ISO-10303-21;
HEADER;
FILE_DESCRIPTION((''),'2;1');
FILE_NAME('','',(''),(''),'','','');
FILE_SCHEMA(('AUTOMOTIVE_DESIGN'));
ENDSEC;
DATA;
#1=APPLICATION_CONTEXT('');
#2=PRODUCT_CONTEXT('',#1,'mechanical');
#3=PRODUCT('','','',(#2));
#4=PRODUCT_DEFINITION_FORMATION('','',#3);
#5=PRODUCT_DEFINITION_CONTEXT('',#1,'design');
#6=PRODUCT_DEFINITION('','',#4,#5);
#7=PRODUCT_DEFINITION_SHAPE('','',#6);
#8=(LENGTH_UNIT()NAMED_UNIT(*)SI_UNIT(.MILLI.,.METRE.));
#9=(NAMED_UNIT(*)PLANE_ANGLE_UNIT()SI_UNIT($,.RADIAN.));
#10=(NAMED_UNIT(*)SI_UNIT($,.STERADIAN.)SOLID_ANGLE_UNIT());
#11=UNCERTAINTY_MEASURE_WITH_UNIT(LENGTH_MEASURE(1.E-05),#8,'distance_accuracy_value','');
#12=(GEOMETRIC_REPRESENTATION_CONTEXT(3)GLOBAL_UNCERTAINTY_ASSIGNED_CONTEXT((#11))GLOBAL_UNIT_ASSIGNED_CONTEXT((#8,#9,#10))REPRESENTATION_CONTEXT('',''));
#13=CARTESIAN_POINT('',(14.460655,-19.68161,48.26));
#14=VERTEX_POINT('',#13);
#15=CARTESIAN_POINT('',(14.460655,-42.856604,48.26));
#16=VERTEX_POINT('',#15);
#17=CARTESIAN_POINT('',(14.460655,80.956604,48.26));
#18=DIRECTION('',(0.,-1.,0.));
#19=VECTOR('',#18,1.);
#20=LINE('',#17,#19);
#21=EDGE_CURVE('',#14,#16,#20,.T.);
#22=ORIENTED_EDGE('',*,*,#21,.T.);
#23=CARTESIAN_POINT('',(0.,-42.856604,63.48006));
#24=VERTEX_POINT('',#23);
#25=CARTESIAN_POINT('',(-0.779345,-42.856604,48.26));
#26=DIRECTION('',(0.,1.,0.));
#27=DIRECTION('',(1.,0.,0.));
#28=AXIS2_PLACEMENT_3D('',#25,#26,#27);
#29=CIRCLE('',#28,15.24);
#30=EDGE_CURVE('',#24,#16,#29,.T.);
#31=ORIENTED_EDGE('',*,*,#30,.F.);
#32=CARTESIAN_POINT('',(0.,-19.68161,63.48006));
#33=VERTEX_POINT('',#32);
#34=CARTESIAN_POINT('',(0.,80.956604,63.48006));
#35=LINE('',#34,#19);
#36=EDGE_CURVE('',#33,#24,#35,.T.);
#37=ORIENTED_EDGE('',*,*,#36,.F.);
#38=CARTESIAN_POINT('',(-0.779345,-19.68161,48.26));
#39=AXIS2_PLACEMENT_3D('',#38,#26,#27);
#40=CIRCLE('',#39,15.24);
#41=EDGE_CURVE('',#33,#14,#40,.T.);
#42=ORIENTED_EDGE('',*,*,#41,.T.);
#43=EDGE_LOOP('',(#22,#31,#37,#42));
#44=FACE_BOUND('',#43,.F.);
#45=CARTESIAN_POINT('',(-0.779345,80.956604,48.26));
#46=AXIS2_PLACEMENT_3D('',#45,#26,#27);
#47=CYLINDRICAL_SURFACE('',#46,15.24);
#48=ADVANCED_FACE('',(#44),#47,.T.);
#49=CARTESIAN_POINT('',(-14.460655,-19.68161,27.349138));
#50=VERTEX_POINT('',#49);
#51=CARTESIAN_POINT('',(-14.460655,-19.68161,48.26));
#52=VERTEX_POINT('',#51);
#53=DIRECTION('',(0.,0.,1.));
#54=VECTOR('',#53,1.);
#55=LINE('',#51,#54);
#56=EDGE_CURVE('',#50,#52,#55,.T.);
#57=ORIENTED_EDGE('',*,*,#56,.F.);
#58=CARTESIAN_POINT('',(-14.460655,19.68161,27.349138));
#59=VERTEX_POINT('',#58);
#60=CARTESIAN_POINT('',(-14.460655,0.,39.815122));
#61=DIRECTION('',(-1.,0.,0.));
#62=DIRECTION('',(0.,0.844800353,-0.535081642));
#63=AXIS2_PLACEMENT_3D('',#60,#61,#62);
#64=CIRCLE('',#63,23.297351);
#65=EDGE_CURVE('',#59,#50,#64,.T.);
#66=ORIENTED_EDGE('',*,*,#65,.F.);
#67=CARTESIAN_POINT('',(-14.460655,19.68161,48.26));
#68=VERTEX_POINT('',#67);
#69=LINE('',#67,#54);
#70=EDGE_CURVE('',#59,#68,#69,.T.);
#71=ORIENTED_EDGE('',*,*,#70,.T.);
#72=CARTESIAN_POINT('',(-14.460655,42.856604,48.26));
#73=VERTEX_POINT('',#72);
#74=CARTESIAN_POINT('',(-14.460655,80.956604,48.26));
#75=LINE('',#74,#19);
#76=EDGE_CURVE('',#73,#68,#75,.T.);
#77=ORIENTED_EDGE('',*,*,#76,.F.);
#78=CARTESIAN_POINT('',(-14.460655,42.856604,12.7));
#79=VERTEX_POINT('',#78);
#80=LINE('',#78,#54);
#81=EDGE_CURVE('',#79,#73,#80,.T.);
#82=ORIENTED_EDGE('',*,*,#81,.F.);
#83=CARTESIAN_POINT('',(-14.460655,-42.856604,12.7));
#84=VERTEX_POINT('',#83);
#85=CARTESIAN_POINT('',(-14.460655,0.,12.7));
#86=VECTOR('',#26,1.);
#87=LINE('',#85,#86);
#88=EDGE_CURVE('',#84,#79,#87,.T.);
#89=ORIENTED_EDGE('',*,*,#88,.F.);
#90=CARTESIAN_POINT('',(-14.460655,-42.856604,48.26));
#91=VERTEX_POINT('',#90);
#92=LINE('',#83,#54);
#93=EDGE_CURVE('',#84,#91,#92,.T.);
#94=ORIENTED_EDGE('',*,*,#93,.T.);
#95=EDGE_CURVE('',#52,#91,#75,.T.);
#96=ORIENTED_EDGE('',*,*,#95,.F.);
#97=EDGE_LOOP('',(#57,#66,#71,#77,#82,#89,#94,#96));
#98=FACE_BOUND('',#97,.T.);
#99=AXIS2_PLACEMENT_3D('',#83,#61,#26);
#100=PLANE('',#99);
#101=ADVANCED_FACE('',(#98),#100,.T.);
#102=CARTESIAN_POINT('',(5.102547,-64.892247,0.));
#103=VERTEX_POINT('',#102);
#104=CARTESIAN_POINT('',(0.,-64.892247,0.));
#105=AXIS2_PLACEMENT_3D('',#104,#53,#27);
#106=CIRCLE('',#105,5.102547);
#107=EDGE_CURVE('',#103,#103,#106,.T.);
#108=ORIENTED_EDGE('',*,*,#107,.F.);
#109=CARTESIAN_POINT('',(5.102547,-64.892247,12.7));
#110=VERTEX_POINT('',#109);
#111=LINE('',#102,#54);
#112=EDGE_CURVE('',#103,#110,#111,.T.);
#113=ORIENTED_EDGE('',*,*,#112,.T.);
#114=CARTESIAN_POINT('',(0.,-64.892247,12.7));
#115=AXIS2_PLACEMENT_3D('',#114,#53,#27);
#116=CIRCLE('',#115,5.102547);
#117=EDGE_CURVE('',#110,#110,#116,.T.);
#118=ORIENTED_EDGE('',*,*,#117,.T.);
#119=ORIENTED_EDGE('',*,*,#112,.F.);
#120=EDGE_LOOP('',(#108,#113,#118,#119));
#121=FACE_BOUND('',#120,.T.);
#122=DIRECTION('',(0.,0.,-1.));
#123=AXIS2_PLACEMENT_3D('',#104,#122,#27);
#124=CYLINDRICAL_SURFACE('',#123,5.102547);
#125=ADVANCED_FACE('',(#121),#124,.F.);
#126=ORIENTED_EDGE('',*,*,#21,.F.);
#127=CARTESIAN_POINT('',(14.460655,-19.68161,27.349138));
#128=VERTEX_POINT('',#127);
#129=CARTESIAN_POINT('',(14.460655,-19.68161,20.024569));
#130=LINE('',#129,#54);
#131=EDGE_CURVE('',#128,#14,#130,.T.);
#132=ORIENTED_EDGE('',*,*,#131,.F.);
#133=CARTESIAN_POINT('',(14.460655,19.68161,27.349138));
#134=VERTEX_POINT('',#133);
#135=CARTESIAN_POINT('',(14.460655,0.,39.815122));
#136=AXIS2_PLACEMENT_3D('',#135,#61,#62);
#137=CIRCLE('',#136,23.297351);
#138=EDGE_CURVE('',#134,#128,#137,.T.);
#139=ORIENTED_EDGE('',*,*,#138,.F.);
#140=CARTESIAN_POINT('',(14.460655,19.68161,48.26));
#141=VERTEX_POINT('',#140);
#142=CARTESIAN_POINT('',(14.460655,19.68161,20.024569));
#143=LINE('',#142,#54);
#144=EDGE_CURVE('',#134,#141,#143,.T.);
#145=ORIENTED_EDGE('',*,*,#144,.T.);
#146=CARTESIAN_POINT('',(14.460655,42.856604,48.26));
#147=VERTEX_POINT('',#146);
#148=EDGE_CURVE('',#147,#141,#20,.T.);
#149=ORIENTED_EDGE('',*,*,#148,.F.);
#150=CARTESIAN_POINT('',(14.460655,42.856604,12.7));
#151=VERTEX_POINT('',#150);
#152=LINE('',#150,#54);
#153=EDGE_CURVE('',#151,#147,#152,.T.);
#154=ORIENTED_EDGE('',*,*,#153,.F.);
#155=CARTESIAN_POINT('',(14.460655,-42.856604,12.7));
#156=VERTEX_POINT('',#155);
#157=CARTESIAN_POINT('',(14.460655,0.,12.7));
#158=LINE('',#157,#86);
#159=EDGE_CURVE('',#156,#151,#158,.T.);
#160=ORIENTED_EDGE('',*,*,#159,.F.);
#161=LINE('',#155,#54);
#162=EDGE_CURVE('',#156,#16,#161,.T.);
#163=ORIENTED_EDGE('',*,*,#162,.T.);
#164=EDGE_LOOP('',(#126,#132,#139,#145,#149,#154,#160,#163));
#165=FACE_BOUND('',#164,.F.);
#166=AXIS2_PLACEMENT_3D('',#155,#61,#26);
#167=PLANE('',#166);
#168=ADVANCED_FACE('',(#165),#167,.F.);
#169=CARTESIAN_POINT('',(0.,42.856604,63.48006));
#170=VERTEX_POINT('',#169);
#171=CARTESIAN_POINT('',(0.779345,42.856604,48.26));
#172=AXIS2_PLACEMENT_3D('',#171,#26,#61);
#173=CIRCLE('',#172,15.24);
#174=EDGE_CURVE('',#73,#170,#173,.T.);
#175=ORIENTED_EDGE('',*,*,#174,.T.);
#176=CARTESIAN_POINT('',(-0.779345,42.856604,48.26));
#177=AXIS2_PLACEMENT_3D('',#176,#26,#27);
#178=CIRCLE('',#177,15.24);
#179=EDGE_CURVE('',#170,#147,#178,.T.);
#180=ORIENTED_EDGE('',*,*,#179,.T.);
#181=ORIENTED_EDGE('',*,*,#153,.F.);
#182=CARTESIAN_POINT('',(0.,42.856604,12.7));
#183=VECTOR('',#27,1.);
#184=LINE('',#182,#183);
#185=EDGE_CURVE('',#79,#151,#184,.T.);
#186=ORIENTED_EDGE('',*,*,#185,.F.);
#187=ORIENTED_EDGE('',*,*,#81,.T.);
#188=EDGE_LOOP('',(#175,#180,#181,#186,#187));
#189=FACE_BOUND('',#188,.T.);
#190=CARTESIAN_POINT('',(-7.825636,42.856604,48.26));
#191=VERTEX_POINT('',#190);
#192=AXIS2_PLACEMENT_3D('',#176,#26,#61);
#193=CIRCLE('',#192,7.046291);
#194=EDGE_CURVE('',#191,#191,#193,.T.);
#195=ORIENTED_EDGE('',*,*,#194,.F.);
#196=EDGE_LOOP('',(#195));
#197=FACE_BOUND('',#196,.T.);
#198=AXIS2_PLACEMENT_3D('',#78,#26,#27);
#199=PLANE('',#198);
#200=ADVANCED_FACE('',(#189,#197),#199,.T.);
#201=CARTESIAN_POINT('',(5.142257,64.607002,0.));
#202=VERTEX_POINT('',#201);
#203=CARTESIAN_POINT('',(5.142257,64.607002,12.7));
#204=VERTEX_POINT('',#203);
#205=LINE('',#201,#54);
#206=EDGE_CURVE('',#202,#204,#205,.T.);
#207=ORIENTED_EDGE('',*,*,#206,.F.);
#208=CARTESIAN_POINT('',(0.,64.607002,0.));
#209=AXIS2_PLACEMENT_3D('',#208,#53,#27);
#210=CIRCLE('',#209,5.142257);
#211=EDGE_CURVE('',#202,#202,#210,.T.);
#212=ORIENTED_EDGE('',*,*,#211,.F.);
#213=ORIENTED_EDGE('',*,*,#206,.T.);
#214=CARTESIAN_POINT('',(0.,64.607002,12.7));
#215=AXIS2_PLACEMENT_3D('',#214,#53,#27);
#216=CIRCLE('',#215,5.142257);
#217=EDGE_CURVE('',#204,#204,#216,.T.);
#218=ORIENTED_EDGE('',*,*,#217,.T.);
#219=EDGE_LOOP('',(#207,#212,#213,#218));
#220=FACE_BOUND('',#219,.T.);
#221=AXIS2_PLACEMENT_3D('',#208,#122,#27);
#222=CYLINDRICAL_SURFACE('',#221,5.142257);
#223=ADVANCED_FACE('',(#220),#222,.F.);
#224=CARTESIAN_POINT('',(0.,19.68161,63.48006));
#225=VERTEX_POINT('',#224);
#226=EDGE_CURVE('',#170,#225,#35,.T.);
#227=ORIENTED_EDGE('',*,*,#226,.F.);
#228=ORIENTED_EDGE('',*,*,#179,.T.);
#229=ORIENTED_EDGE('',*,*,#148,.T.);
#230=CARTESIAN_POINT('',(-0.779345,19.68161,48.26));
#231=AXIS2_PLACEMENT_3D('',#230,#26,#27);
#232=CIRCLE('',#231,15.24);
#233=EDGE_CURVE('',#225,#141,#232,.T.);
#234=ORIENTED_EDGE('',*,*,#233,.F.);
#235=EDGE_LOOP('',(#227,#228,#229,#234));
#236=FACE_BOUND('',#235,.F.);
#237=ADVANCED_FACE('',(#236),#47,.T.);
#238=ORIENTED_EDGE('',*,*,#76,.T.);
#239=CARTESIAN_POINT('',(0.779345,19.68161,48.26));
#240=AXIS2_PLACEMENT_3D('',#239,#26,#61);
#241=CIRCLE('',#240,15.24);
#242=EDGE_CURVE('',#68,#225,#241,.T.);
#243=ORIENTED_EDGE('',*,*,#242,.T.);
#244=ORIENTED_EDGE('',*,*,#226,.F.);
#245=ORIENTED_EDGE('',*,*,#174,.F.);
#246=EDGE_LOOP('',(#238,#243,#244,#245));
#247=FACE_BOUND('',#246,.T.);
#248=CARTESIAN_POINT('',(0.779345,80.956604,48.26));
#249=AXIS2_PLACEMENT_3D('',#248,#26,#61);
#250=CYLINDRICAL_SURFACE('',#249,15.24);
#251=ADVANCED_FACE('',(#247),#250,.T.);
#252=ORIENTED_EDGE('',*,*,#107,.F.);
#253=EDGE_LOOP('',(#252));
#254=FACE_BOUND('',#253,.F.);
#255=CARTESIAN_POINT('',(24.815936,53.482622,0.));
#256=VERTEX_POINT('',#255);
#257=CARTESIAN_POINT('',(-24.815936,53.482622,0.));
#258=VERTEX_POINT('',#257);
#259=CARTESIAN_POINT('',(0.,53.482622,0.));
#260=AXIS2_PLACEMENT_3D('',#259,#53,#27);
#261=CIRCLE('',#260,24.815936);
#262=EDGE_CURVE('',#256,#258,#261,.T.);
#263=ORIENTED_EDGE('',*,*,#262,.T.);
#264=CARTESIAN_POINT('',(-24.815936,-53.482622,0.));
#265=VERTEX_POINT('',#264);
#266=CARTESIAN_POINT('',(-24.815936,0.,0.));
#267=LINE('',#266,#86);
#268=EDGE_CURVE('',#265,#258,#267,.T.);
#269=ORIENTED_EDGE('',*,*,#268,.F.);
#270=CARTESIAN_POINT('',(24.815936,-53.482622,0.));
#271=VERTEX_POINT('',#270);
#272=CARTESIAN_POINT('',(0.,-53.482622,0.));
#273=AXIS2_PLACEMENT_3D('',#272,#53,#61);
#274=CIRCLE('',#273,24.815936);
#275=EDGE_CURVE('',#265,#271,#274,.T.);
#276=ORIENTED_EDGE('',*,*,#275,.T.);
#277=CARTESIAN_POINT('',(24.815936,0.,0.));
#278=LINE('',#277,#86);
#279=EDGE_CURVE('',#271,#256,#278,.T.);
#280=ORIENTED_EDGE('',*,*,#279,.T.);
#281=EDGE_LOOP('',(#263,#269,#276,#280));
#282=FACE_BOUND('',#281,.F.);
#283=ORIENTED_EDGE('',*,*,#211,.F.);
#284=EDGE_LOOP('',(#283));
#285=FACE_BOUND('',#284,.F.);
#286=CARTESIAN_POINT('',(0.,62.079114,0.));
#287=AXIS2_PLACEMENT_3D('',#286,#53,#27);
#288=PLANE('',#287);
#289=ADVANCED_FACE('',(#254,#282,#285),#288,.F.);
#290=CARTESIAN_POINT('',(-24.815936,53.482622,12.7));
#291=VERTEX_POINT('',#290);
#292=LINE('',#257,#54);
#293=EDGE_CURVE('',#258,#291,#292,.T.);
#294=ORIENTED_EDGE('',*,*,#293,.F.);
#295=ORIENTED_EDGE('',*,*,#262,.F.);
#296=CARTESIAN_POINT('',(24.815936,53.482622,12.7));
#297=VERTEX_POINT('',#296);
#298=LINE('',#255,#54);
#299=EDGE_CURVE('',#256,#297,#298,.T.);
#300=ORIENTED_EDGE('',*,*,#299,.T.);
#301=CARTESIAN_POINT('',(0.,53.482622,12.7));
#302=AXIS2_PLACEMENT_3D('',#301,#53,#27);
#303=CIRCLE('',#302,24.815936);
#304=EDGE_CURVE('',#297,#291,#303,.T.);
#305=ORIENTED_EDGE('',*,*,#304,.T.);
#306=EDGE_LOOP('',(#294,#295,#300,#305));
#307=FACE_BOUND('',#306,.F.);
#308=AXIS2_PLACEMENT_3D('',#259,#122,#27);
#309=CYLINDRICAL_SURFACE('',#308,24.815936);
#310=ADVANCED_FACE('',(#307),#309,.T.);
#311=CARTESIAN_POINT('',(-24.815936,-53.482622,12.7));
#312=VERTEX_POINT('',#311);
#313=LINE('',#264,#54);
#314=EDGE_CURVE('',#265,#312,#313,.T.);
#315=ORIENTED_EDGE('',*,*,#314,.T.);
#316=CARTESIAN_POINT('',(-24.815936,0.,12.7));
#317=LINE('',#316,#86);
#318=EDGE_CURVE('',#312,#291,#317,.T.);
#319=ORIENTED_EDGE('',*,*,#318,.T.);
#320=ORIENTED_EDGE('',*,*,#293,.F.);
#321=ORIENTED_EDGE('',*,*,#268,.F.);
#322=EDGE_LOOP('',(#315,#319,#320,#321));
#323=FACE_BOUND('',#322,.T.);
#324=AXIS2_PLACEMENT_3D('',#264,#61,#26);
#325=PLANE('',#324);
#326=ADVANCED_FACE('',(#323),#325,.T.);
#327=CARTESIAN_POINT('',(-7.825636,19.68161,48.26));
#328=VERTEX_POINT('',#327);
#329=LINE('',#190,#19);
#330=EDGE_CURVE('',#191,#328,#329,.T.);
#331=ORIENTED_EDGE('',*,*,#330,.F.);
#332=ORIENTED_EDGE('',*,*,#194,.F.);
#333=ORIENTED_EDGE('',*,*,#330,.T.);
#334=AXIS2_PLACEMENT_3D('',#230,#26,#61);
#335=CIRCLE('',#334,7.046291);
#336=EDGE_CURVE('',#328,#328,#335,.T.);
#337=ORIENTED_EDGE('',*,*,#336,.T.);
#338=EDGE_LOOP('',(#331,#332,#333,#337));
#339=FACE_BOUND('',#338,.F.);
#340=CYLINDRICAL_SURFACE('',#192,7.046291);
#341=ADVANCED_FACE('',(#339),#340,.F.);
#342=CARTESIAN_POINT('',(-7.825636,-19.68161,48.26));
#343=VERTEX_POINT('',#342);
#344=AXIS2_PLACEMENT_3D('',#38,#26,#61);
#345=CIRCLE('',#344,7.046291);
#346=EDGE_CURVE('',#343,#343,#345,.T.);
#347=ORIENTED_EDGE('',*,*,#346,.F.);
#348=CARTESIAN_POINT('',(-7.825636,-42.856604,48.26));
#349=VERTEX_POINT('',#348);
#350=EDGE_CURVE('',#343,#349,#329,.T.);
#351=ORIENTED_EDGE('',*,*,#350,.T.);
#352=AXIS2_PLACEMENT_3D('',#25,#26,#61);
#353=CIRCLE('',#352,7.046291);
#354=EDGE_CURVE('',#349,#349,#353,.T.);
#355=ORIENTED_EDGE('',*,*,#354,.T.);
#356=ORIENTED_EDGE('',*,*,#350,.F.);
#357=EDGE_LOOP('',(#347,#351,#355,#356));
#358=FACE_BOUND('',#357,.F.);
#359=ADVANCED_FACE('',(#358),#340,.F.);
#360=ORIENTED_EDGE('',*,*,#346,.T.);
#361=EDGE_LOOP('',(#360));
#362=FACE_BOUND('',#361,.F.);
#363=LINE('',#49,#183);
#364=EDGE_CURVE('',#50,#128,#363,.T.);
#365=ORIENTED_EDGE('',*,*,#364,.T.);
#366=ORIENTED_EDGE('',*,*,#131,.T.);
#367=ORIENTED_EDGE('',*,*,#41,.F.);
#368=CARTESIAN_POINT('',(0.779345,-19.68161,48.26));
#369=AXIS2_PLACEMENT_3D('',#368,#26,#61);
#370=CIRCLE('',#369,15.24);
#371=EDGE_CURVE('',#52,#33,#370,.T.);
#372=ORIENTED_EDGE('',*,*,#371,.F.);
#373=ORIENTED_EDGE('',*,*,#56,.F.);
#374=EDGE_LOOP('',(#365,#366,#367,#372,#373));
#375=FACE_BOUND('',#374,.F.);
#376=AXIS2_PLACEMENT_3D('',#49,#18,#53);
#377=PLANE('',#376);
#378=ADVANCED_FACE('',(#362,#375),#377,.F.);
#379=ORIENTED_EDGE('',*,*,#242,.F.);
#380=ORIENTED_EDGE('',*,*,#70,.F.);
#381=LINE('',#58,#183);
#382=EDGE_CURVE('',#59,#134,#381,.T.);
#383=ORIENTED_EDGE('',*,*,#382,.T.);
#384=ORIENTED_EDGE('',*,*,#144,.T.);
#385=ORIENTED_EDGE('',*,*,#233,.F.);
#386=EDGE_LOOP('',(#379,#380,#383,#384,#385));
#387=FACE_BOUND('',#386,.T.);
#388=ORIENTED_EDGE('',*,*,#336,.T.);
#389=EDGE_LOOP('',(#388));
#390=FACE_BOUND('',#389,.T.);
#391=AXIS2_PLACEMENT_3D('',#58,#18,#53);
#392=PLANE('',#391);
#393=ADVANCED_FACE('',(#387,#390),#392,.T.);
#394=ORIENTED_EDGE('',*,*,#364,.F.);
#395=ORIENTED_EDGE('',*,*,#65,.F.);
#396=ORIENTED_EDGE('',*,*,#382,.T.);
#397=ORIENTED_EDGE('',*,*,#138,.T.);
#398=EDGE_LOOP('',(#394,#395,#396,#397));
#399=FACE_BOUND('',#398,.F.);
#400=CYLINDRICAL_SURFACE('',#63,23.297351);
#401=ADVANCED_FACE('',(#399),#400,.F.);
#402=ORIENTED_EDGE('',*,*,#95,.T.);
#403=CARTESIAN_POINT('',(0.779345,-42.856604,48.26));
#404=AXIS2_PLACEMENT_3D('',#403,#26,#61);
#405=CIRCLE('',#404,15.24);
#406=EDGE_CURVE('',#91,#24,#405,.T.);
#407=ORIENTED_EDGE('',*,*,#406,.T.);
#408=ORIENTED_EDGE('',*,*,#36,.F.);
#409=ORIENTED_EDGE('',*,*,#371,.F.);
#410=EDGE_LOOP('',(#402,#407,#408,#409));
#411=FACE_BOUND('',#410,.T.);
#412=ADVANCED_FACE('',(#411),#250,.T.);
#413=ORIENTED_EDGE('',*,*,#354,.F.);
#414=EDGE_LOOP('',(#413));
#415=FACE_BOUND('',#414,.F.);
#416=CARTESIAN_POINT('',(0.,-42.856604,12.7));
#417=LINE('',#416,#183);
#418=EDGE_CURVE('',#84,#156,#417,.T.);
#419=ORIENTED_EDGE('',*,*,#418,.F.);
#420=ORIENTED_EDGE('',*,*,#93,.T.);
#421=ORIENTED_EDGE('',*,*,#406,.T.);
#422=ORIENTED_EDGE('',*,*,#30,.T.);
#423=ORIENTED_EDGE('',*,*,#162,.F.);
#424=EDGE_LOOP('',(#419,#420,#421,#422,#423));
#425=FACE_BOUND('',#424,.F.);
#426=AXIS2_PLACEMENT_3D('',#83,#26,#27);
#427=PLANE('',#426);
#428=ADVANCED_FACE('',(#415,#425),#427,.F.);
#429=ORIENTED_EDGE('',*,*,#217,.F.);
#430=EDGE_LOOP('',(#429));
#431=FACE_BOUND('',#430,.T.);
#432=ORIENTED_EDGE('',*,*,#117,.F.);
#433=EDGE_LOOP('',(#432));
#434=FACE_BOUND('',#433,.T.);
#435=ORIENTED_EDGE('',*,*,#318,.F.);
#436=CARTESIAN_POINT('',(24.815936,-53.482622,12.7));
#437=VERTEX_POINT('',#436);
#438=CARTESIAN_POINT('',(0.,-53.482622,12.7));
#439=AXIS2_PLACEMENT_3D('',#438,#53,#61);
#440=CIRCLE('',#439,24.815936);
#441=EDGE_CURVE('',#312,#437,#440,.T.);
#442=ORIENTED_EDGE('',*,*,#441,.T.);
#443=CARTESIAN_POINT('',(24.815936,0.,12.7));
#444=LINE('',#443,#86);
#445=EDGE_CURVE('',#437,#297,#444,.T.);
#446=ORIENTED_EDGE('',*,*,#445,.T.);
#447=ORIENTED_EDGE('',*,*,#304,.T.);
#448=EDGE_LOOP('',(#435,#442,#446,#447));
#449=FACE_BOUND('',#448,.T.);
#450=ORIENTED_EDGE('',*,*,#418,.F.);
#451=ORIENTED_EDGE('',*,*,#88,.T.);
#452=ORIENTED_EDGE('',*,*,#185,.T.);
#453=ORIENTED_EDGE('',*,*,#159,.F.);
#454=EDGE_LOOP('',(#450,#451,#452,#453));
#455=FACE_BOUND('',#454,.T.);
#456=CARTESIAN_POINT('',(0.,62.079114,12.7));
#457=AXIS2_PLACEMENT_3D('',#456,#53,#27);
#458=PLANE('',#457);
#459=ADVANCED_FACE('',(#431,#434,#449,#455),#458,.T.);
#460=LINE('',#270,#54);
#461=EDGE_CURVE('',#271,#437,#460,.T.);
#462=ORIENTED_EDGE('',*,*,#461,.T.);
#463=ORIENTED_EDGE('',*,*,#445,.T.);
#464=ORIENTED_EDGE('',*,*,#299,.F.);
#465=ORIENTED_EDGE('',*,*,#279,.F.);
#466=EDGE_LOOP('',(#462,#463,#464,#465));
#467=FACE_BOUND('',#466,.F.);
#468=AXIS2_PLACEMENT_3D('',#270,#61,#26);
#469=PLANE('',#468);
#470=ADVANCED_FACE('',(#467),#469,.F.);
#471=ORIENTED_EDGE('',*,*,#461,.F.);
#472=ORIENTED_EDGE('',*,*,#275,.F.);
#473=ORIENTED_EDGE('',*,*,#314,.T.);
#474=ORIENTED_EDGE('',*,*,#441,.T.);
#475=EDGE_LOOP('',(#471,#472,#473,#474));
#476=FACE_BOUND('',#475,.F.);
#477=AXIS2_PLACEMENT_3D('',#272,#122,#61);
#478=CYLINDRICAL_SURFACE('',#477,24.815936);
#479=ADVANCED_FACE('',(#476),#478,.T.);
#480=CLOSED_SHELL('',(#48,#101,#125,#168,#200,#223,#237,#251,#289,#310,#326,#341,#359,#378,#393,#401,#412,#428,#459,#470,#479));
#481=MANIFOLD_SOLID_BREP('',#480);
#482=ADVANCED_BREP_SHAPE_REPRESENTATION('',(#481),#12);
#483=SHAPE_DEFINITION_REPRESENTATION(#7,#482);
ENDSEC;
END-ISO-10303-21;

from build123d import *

# Parameters (mm, degrees)
F0_R          = 5.1422573348
F0_W          = 49.6318712831
F0_H          = 106.9652438164
F0_R_2        = 5.1025471004
F1_DEPTH      = 12.7
F2_W          = 28.9213098586
F2_H          = 85.7132077217
F3_DEPTH      = 50.8
F4_T1_DEPTH   = 161.9132077217
F5_R          = 7.0462908342
F6_DEPTH      = 101.6
F7_W          = 39.3632203341
F7_H          = 41.8217248726
F8_DEPTH      = 50.8
F8_DEPTH_BACK = 25.4


# Not quite as in the source:
# - a fillet or chamfer that OpenCascade refuses, or shapes differently, is made with other operations: its cross-section is extruded or revolved along the edge and cut away or added


with BuildPart() as f1:
    # F0 (on Top) → F1 (new body)
    with BuildSketch(Plane.XY):
        with BuildLine():
            ThreePointArc((24.8159356415, 53.4826219082), (0, 78.2985575497), (-24.8159356415, 53.4826219082))
            Line((-24.8159356415, 53.4826219082), (24.8159356415, 53.4826219082))
        make_face()
        with Locations((0, 64.6070018411)):
            Circle(F0_R, mode=Mode.SUBTRACT)
        Rectangle(F0_W, F0_H)
        with BuildLine():
            Line((24.8159356415, -53.4826219082), (-24.8159356415, -53.4826219082))
            ThreePointArc((-24.8159356415, -53.4826219082), (0, -78.2985575497), (24.8159356415, -53.4826219082))
        make_face()
        with Locations((0, -64.8922473192)):
            Circle(F0_R_2, mode=Mode.SUBTRACT)
    extrude(amount=F1_DEPTH)

    # F2 (on face) → F3 (join)
    with BuildSketch(Plane.XY.offset(12.7)):
        Rectangle(F2_W, F2_H)
    extrude(amount=F3_DEPTH)

    # F4: fillet of radius 15.24 on 2 edges, made by hand

    # F4_s2 → F4_t1 (cut)
    with BuildSketch(Plane.XZ.offset(-80.9566038609)):
        with BuildLine():
            ThreePointArc((14.4606549293, 48.26), (9.9969622746, 59.0363073453), (-0.7793450707, 63.5))
            Line((-0.7793450707, 63.5), (14.4606549293, 63.5))
            Line((14.4606549293, 63.5), (14.4606549293, 48.26))
        make_face()
        with BuildLine():
            ThreePointArc((-14.4606549293, 48.26), (-9.9969622746, 59.0363073453), (0.7793450707, 63.5))
            Line((0.7793450707, 63.5), (-14.4606549293, 63.5))
            Line((-14.4606549293, 63.5), (-14.4606549293, 48.26))
        make_face()
    extrude(amount=F4_T1_DEPTH, mode=Mode.SUBTRACT)

    # F5 (on face) → F6 (cut)
    with BuildSketch(Plane(origin=(0, 42.8566038609, 0), x_dir=(-1, 0, 0), z_dir=(0, 1, 0))):
        with Locations((0.7793450707, 48.26)):
            Circle(F5_R)
    extrude(amount=-F6_DEPTH, mode=Mode.SUBTRACT)

    # F7 (on face) → F8 (cut, two sides)
    with BuildSketch(Plane(origin=(-14.4606549293, 0, 0), x_dir=(0, -1, 0), z_dir=(-1, 0, 0))) as f8_sk:
        with Locations((0, 48.26)):
            Rectangle(F7_W, F7_H)
        with BuildLine():
            Line((19.681610167, 27.3491375637), (-19.681610167, 27.3491375637))
            ThreePointArc((-19.681610167, 27.3491375637), (0, 16.517771495), (19.681610167, 27.3491375637))
        make_face()
    extrude(amount=-F8_DEPTH, mode=Mode.SUBTRACT)
    extrude(f8_sk.sketch, amount=F8_DEPTH_BACK, mode=Mode.SUBTRACT)


solid = f1.part
